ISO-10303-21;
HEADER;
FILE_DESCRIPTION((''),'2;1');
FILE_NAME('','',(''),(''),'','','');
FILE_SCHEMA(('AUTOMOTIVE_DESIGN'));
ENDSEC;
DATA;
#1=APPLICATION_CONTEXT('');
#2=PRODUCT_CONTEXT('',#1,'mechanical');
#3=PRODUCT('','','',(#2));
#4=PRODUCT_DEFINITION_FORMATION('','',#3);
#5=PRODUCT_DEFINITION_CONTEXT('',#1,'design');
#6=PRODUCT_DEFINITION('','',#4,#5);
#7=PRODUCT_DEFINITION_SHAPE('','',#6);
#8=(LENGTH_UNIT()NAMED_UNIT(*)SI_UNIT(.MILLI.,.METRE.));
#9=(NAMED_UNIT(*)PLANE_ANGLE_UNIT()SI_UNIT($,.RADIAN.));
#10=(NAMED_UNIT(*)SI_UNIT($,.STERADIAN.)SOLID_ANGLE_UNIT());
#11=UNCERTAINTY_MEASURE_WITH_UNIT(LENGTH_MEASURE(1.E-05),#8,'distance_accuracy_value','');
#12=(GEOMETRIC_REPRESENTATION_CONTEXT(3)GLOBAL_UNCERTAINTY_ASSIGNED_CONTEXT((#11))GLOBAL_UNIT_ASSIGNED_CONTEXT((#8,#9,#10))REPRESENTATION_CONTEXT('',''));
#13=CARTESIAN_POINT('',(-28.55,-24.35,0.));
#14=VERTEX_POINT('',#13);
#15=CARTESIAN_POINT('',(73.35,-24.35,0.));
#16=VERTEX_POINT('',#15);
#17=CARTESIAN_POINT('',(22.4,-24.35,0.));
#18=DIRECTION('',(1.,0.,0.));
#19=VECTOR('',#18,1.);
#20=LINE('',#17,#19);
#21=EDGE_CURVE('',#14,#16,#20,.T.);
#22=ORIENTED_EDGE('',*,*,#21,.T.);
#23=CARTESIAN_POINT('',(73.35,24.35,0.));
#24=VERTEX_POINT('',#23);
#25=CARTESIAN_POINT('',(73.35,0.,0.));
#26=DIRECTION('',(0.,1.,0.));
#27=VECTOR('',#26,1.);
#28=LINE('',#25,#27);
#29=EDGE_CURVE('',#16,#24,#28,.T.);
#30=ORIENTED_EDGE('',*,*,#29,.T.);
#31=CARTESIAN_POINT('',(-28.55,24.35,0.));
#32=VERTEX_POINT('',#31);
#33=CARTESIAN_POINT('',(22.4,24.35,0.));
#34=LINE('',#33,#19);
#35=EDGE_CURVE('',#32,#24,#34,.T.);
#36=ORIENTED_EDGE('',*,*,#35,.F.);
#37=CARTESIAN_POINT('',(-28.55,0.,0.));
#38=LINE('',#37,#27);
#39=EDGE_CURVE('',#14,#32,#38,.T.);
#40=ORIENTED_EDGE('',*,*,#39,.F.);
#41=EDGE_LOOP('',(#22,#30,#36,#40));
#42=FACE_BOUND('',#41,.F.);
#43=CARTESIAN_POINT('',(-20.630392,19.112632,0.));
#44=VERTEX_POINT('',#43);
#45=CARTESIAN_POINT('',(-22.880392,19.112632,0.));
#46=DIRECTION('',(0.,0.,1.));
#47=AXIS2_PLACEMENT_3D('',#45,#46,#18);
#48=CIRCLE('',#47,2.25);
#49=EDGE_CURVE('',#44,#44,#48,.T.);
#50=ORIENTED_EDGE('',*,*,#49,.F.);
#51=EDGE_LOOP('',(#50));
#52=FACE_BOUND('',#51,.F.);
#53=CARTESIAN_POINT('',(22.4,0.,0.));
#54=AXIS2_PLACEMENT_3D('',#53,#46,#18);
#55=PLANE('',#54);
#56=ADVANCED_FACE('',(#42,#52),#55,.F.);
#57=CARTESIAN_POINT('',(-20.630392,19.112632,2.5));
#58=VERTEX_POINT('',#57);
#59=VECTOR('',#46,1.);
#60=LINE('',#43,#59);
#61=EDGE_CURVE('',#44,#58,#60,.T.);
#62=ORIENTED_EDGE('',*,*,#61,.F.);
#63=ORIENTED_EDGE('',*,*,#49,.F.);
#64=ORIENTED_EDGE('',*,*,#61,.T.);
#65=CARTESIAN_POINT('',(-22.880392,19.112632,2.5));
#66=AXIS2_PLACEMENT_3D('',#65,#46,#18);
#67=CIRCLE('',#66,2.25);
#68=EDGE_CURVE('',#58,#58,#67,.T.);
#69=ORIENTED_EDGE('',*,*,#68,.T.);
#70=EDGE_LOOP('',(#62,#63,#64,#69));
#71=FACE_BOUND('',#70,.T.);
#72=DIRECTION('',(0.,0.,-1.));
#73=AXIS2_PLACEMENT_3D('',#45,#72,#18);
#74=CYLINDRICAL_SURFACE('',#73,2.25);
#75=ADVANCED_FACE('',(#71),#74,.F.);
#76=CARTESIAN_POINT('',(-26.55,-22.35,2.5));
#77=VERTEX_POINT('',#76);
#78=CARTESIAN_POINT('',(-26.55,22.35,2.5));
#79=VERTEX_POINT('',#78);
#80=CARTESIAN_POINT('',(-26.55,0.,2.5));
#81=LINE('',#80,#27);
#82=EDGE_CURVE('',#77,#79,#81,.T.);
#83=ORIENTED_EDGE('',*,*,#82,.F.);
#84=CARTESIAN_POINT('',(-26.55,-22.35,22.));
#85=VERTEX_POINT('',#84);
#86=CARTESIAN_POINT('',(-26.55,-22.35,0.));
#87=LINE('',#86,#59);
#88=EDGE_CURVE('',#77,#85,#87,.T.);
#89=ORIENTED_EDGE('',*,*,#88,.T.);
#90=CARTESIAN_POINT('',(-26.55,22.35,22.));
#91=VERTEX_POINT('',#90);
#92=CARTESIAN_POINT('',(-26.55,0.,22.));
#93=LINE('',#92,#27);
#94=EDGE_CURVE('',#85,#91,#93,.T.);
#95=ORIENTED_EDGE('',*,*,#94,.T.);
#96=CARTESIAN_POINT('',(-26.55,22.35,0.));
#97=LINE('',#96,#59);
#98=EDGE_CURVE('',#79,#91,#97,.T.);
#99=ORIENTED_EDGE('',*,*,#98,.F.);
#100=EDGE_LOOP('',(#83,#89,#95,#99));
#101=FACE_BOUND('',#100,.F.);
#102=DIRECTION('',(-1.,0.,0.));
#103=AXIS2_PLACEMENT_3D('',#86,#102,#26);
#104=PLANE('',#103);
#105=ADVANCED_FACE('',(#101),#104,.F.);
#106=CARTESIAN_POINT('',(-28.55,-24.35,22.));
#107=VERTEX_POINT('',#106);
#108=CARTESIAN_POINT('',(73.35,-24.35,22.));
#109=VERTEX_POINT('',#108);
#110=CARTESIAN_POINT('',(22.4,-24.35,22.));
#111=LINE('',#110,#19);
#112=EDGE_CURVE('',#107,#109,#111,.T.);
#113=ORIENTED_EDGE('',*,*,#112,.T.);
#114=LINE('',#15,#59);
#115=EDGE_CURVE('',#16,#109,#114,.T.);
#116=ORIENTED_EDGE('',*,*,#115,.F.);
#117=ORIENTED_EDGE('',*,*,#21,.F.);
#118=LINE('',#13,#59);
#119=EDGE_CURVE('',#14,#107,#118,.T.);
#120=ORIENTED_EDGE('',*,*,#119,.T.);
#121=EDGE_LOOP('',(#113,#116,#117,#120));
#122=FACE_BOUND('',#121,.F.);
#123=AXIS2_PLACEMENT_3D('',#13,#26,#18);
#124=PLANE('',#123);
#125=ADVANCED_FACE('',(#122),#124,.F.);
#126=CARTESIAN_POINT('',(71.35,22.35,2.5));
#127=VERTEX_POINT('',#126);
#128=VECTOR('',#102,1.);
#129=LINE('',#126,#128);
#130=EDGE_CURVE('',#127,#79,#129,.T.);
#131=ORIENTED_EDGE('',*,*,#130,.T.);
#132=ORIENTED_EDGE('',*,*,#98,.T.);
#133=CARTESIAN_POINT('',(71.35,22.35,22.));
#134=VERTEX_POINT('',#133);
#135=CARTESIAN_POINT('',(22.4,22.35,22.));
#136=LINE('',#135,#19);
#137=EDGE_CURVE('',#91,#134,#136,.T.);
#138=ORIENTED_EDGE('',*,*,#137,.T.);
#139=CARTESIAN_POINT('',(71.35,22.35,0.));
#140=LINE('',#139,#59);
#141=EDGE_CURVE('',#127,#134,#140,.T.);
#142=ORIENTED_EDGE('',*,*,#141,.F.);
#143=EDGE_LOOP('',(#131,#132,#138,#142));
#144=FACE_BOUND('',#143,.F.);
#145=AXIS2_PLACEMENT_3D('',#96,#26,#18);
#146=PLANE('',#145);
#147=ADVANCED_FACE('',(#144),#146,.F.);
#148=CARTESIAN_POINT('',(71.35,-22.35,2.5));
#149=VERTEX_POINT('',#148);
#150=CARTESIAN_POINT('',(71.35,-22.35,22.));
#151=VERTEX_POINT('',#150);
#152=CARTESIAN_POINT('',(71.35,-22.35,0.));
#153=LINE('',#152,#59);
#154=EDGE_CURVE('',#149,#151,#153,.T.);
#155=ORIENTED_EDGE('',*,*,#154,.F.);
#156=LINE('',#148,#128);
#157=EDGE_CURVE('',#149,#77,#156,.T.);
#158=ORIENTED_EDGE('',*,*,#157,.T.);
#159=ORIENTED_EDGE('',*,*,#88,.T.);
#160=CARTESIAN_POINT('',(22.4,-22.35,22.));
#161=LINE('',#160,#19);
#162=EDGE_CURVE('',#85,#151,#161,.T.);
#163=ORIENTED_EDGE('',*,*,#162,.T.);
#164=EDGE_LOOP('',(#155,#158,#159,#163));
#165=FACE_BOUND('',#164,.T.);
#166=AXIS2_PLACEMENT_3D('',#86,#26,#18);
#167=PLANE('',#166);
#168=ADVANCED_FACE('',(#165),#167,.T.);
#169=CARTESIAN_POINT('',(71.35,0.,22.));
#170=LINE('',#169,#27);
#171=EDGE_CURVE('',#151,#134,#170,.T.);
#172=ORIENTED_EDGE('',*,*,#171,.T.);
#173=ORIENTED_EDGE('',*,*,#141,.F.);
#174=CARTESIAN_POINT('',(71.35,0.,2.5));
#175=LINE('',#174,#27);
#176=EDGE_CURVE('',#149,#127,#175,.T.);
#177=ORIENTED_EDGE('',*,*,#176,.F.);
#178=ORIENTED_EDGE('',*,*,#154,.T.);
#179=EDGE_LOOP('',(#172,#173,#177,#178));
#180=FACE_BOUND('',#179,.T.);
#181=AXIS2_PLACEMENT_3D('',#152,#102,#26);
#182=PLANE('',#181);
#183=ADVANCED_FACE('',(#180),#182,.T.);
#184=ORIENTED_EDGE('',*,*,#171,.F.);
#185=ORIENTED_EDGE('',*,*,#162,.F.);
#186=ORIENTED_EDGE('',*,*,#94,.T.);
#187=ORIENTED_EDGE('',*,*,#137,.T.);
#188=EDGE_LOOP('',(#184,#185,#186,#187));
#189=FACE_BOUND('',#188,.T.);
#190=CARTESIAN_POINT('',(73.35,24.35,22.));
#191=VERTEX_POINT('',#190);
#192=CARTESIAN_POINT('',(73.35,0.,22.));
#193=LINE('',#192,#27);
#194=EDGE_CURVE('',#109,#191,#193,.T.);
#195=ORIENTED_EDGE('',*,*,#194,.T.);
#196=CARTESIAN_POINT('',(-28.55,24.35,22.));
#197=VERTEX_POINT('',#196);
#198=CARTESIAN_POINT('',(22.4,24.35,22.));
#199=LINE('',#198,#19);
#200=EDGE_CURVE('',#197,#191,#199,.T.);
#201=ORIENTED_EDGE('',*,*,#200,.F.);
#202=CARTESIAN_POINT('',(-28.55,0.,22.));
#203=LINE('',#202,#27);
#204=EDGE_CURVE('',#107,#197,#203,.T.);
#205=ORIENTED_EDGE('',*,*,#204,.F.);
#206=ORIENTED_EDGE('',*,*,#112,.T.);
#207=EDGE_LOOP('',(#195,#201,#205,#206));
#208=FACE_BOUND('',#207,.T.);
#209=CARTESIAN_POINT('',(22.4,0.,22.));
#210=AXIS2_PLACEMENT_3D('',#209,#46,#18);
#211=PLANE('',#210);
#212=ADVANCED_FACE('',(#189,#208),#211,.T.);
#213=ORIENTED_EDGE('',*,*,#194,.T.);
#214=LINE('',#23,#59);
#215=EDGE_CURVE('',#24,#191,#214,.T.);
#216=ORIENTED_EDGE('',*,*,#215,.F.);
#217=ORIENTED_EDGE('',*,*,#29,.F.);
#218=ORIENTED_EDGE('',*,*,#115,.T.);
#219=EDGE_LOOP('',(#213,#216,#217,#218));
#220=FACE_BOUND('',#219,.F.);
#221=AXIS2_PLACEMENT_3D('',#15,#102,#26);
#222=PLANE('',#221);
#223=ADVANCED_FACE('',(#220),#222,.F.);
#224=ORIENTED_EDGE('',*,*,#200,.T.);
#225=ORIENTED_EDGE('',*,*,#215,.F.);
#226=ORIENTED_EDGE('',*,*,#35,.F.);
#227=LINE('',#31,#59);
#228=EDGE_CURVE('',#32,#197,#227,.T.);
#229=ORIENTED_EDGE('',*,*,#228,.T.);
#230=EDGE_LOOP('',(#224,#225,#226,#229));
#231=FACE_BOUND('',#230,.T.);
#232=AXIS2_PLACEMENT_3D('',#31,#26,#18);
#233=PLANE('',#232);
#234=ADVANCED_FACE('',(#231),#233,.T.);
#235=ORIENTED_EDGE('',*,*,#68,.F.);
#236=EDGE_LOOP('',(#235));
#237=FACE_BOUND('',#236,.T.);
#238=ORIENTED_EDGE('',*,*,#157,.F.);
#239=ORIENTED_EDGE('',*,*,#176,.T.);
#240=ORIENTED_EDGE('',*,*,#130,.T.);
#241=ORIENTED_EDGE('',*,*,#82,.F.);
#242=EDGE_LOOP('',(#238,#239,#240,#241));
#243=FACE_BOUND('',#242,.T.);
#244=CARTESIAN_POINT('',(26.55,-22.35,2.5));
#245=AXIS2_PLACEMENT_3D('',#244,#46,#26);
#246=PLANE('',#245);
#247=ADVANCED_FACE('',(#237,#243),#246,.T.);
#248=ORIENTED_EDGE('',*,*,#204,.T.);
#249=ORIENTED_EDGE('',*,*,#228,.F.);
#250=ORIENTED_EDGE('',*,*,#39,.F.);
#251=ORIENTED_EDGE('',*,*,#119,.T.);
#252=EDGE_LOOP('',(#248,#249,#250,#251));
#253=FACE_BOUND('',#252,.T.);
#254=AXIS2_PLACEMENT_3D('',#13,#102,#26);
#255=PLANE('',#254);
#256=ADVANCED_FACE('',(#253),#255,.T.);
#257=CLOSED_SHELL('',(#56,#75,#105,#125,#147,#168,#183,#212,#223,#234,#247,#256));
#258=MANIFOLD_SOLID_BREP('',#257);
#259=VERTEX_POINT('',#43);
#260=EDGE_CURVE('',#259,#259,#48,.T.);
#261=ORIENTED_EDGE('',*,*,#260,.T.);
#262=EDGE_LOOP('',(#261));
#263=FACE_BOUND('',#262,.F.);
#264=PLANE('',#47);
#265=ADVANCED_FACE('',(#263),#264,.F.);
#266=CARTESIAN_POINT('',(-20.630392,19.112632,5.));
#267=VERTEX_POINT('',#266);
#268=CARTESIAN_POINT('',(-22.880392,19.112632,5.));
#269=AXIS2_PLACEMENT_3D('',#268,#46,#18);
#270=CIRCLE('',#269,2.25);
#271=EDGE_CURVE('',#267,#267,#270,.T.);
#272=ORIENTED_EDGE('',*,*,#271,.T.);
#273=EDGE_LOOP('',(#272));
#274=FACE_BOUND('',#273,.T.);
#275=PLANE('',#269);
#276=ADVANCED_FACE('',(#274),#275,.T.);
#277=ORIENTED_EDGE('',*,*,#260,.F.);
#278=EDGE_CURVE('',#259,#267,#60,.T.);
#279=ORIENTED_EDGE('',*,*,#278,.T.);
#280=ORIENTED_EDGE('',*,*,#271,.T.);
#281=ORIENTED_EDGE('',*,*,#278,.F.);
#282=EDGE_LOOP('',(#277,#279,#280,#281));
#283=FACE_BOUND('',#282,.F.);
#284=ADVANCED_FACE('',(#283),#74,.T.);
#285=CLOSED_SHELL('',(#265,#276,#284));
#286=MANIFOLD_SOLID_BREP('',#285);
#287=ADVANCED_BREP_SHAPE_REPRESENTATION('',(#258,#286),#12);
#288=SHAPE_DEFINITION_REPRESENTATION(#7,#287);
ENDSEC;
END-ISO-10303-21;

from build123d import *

# Parameters (mm, degrees)
F0_R     = 2.25
F1_DEPTH = 5
F0_W     = 53.1
F0_H     = 44.7
F2_DEPTH = 2.5
F6_DEPTH = 44.8
F7_W     = 101.9
F7_H     = 48.7
F7_W_2   = 97.9
F7_H_2   = 44.7
F8_DEPTH = 22


# Not quite as in the source:
# - a feature names something its author has since deleted; it is built from what else it names
# - the program builds the solid bodies; features that only make, move or delete a surface that nothing else refers to are left out


with BuildPart() as f1:
    # F0 (on Top) → F1 (new body)
    with BuildSketch(Plane.XY):
        with Locations((-22.8803921491, 19.1126316786)):
            Circle(F0_R)
    extrude(amount=F1_DEPTH)


with BuildPart() as f2:
    # F0 (on Top) → F2 (new body)
    with BuildSketch(Plane.XY):
        Rectangle(F0_W, F0_H)
        with Locations((-22.8803921491, 19.1126316786)):
            Circle(F0_R, mode=Mode.SUBTRACT)
    extrude(amount=F2_DEPTH)

    # F6 (add): a face of the model
    f6_faces = [f2.faces().sort_by_distance(p)[0] for p in [
        (26.55, 0, 1.25),
    ]]
    extrude(f6_faces, amount=F6_DEPTH)

    # F7 (on Top) → F8 (join)
    with BuildSketch(Plane.XY):
        with Locations((22.4, 0)):
            Rectangle(F7_W, F7_H)
        with Locations((22.4, 0)):
            Rectangle(F7_W_2, F7_H_2, mode=Mode.SUBTRACT)
    extrude(amount=F8_DEPTH)


solid = Compound([f1.part, f2.part])
